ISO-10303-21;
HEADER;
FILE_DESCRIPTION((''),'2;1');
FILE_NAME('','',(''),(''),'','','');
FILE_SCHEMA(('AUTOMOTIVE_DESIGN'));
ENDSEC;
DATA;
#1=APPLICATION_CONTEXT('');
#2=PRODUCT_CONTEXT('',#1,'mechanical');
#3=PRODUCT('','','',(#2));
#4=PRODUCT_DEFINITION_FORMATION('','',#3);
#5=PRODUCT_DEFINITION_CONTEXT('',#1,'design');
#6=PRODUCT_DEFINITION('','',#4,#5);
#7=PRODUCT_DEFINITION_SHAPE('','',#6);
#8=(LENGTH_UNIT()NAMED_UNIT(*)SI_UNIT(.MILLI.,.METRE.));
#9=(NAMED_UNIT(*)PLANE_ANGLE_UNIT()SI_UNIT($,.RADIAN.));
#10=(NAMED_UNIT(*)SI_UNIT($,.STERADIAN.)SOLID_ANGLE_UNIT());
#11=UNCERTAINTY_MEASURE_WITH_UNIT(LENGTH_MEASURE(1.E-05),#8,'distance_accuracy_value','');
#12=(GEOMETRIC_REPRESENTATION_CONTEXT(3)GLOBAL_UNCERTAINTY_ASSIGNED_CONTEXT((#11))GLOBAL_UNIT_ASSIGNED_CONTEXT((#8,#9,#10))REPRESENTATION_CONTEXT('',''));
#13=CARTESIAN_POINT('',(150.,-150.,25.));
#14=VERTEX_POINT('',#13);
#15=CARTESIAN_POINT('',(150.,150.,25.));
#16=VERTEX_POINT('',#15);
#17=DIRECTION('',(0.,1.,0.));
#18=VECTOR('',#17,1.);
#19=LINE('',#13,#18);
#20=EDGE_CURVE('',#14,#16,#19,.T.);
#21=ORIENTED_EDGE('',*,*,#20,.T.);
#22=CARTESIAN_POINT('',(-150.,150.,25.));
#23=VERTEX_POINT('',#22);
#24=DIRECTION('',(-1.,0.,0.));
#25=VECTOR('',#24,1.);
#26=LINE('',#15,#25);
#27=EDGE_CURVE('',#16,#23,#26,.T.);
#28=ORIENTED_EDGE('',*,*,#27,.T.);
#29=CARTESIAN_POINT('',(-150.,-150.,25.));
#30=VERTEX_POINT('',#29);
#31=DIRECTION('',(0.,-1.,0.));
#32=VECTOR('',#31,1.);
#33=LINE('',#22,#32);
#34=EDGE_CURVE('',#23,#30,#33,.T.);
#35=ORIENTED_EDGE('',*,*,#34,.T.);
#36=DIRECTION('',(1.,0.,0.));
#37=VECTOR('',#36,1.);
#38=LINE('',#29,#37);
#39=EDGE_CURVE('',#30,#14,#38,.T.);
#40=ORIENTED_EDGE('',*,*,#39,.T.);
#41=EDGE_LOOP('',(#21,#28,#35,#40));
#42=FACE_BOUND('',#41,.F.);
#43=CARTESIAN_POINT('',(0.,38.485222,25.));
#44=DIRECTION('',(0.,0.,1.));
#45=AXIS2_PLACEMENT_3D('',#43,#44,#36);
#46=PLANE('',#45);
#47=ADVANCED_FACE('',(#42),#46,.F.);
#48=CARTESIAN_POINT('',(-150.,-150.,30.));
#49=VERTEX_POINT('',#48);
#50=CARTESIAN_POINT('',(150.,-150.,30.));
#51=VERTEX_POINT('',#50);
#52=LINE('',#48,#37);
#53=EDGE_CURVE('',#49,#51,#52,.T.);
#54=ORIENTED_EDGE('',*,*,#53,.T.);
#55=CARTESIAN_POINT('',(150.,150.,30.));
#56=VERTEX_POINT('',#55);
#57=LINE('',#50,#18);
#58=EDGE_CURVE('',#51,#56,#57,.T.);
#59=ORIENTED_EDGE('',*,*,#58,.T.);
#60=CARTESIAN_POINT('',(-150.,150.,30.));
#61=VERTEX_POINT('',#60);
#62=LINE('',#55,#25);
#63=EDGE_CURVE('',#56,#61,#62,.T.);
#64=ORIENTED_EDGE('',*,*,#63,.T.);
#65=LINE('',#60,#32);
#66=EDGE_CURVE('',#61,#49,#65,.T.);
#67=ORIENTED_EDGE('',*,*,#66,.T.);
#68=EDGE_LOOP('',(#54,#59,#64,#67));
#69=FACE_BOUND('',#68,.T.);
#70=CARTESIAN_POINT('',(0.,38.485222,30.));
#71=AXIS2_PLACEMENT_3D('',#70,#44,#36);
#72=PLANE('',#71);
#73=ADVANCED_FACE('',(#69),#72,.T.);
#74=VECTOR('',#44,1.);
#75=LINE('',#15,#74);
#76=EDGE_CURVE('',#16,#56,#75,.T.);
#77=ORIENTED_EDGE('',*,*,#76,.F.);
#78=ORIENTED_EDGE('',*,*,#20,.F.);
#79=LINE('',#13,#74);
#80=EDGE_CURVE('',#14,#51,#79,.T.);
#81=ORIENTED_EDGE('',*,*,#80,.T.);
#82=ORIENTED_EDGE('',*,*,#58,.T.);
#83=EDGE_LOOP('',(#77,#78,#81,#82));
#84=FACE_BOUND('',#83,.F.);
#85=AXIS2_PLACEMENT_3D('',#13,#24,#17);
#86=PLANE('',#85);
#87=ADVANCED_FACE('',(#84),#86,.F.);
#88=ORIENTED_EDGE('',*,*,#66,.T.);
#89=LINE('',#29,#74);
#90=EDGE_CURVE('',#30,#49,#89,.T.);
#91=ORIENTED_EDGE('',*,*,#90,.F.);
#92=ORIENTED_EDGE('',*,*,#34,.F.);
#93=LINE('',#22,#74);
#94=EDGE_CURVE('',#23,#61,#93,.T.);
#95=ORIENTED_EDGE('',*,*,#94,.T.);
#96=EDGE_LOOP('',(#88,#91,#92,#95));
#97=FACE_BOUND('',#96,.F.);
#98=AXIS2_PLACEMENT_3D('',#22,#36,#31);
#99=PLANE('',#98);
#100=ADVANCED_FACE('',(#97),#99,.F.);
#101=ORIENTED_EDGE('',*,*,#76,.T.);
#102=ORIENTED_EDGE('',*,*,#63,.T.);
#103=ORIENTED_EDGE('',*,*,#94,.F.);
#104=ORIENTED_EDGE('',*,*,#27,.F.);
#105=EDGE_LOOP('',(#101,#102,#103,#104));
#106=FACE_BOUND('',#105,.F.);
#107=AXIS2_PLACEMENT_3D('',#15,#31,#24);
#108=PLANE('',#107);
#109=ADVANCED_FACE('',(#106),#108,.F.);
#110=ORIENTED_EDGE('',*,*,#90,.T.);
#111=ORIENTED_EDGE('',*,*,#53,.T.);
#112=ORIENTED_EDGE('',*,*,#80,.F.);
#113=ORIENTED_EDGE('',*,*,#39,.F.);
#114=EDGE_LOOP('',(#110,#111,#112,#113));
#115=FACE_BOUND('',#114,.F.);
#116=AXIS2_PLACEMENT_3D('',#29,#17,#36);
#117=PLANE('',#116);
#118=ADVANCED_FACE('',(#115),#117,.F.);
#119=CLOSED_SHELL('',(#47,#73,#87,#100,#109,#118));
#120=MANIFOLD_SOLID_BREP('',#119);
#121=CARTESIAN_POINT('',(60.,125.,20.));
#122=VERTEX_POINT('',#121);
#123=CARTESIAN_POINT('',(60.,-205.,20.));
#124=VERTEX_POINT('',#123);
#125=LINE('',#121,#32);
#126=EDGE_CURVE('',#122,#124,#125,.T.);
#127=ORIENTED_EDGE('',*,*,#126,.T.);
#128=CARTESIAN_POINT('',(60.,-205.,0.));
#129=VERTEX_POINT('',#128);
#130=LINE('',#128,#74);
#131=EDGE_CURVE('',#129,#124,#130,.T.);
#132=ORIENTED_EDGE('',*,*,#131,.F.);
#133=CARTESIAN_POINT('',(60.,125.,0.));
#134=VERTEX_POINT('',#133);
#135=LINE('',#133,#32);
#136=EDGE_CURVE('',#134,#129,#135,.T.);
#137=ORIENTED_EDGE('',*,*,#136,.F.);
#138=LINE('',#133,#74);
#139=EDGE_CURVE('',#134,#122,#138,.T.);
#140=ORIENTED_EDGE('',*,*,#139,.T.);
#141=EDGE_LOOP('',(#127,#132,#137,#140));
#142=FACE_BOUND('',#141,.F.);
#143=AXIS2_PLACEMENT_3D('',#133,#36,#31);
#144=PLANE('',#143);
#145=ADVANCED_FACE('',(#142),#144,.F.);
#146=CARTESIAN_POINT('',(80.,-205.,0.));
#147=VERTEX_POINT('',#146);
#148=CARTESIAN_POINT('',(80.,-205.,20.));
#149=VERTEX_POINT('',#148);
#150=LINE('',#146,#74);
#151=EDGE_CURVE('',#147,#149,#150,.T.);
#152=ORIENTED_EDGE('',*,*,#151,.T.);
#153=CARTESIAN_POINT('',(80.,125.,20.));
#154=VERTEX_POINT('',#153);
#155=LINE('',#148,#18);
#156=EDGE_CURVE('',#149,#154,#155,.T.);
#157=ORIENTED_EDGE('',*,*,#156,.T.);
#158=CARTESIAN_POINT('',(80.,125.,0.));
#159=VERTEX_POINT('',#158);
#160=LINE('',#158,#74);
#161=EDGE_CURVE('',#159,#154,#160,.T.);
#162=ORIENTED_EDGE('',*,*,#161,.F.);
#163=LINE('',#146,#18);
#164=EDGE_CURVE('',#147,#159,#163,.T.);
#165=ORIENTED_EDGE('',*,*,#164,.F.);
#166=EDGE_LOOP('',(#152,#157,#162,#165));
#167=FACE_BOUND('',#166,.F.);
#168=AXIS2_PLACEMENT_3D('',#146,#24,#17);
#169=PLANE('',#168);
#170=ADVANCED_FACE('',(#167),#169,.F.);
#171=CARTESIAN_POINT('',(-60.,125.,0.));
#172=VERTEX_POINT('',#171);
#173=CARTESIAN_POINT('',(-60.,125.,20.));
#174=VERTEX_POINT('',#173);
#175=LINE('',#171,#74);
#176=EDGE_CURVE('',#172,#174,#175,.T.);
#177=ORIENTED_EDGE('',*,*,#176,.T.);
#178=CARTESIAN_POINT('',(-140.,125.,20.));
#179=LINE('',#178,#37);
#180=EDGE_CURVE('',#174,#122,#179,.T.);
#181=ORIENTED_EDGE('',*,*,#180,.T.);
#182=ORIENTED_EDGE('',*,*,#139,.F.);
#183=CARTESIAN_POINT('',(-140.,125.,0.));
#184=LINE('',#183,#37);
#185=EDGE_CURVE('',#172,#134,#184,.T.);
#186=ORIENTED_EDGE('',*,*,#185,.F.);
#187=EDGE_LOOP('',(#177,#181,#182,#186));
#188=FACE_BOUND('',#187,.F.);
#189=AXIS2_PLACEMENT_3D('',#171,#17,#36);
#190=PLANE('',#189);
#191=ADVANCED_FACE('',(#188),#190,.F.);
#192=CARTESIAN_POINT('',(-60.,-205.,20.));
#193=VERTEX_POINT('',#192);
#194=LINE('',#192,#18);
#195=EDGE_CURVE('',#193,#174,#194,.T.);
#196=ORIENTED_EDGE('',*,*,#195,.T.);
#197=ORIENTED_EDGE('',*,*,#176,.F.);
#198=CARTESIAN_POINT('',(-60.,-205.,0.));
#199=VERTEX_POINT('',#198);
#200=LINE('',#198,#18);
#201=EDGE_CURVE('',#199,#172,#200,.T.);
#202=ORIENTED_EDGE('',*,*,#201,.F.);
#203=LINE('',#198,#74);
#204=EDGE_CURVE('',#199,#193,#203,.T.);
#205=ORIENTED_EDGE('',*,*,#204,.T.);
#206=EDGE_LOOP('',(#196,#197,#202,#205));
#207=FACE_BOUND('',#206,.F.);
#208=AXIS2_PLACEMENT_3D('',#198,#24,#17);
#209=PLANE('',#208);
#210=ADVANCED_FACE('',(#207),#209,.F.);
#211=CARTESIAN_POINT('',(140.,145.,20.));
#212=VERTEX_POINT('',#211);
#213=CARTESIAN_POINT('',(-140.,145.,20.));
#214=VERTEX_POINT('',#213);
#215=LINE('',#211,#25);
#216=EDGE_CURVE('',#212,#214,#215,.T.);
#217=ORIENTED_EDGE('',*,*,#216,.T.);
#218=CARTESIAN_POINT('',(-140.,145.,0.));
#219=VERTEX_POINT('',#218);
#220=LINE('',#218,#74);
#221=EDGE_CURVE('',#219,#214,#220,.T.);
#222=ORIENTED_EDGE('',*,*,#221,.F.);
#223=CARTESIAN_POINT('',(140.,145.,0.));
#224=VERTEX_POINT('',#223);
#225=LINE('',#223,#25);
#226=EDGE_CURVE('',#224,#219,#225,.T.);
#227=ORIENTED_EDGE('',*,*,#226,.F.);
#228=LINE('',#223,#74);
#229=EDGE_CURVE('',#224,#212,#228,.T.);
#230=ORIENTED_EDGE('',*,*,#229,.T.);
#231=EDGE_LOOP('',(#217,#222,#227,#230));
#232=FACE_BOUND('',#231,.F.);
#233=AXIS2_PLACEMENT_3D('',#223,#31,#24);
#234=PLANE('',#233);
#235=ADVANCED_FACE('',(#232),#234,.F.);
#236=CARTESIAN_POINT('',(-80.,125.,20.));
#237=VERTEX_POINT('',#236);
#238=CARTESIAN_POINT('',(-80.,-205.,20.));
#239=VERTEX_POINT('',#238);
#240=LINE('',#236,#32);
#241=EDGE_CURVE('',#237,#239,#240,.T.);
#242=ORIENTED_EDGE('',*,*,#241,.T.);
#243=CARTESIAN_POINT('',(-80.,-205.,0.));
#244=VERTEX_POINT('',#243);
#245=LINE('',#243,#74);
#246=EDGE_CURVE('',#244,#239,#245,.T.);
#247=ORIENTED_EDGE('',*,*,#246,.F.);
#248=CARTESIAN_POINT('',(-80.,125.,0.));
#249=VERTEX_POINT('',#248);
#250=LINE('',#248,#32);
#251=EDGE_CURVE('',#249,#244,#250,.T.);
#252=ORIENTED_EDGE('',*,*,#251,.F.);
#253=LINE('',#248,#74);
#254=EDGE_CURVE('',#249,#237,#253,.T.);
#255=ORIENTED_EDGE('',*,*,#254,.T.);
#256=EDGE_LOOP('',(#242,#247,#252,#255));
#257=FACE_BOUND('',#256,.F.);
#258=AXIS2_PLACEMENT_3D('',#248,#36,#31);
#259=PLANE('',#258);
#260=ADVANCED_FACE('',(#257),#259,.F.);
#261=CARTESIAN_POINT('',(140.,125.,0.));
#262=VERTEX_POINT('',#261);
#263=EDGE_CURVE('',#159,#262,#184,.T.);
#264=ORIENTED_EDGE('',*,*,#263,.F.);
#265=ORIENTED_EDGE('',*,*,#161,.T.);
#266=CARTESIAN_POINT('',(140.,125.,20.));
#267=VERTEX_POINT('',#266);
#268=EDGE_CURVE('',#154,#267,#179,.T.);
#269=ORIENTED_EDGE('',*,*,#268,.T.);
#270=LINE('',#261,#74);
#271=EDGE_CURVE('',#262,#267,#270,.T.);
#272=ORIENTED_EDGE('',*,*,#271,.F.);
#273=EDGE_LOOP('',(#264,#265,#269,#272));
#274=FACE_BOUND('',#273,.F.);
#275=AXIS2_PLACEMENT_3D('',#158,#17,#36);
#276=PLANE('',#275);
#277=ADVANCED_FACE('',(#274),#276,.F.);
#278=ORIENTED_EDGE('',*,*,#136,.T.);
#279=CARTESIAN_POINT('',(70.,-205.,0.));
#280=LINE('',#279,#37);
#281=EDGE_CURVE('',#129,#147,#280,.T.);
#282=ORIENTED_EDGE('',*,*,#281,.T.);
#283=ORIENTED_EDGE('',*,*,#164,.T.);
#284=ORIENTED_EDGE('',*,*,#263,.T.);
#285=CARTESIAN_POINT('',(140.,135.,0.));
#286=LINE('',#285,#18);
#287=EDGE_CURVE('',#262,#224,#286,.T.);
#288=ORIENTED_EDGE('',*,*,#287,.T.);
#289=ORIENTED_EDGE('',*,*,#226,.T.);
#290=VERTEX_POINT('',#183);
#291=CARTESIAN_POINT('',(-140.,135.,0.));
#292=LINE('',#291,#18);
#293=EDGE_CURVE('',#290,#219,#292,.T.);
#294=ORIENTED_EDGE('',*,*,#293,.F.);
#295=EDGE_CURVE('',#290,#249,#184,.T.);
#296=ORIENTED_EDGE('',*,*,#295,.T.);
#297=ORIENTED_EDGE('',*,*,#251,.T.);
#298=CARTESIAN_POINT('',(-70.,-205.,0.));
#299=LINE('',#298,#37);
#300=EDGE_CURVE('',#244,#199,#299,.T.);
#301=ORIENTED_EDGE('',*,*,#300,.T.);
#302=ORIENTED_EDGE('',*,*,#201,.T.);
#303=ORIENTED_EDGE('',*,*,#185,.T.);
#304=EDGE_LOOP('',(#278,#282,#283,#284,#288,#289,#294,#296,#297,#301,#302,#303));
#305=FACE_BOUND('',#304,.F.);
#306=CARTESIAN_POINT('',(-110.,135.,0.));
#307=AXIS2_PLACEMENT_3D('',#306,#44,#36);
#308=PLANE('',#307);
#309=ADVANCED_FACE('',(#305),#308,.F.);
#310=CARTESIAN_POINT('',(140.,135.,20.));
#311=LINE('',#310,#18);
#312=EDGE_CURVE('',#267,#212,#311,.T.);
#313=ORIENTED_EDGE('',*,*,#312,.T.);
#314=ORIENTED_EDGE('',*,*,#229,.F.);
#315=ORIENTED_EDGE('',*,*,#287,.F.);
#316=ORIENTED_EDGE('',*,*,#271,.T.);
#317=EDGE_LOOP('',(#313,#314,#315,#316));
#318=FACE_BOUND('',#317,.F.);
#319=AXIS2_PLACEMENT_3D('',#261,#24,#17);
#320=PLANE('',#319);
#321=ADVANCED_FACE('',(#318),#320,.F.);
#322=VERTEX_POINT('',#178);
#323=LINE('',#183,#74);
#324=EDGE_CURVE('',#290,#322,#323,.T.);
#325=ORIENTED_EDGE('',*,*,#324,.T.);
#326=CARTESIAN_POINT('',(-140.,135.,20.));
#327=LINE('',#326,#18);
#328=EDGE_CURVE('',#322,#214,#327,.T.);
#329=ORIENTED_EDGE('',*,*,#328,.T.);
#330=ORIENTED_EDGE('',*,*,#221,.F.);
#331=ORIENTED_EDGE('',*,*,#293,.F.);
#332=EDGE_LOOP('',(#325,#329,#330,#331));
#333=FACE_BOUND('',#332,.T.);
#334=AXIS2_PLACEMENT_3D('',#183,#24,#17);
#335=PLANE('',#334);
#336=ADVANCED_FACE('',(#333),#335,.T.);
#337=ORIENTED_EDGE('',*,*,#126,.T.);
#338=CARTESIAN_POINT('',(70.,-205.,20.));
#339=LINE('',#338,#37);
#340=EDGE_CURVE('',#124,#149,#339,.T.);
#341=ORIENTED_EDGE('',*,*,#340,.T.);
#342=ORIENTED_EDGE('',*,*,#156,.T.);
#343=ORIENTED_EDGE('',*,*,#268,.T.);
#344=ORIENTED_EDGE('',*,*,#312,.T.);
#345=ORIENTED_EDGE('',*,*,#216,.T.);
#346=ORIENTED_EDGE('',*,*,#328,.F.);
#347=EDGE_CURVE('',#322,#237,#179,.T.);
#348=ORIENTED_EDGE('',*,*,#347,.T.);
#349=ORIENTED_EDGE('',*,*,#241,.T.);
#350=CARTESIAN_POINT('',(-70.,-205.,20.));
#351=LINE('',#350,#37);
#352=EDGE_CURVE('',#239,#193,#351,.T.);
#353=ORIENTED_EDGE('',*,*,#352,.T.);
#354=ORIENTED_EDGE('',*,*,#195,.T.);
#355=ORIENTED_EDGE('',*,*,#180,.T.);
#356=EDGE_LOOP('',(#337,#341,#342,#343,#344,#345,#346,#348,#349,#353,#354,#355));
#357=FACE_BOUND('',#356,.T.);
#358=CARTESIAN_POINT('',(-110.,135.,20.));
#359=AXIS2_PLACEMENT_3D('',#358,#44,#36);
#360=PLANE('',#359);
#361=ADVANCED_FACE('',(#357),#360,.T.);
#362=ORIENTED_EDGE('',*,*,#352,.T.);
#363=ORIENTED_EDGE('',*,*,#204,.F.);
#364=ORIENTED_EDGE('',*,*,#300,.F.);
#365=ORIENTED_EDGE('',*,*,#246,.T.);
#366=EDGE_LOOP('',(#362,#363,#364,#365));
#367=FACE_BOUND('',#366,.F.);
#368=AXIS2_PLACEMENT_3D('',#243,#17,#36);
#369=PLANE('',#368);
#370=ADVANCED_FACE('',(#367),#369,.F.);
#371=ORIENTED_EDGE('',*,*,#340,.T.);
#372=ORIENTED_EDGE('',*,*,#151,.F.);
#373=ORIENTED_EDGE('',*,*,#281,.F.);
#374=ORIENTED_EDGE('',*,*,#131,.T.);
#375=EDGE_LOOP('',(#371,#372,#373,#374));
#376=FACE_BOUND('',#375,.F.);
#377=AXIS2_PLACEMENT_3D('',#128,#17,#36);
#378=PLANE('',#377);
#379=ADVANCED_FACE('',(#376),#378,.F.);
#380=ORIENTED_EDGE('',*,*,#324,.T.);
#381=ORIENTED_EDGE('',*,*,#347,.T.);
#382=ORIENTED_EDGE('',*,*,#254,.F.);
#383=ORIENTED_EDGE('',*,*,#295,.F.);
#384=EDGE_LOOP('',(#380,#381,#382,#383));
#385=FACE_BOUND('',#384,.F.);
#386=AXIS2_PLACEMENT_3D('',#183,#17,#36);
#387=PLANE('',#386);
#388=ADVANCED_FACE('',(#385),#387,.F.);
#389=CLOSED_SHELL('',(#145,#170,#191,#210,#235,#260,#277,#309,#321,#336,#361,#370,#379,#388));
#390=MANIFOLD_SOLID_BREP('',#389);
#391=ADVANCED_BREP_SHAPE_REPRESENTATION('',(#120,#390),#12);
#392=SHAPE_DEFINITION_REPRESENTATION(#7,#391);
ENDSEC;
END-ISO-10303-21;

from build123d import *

# Parameters (mm, degrees)
F1_START = 25
F0_W     = 20
F0_H     = 275
F0_W_2   = 120
F0_W_3   = 60
F0_H_2   = 20
F1_DEPTH = 5
F0_H_3   = 55
F2_DEPTH = 20


# Not quite as in the source:
# - a feature names something its author has since deleted; it is built from what else it names


with BuildPart() as f1:
    # F0 (on Top) → F1 (new body)
    with BuildSketch(Plane.XY.offset(F1_START)):
        Polygon((150, -150), (150, 150), (-150, 150), (-150, -150), (-80, -150), (-80, 125), (-140, 125), (-140, 145), (-80, 145), (-60, 145), (60, 145), (80, 145), (140, 145), (140, 125), (80, 125), (80, -150), align=None)
        with Locations((-70, -12.5)):
            Rectangle(F0_W, F0_H)
        with Locations((0, -12.5)):
            Rectangle(F0_W_2, F0_H)
        with Locations((70, -12.5)):
            Rectangle(F0_W, F0_H)
        with Locations((-110, 135)):
            Rectangle(F0_W_3, F0_H_2)
        with Locations((-70, 135)):
            Rectangle(F0_W, F0_H_2)
        with Locations((0, 135)):
            Rectangle(F0_W_2, F0_H_2)
        with Locations((70, 135)):
            Rectangle(F0_W, F0_H_2)
        with Locations((110, 135)):
            Rectangle(F0_W_3, F0_H_2)
    extrude(amount=F1_DEPTH)


with BuildPart() as f2:
    # F0 (on Top) → F2 (new body)
    with BuildSketch(Plane.XY):
        with Locations((-110, 135)):
            Rectangle(F0_W_3, F0_H_2)
        with Locations((-70, 135)):
            Rectangle(F0_W, F0_H_2)
        with Locations((0, 135)):
            Rectangle(F0_W_2, F0_H_2)
        with Locations((70, 135)):
            Rectangle(F0_W, F0_H_2)
        with Locations((110, 135)):
            Rectangle(F0_W_3, F0_H_2)
        with Locations((70, -12.5)):
            Rectangle(F0_W, F0_H)
        with Locations((-70, -12.5)):
            Rectangle(F0_W, F0_H)
        with Locations((-70, -177.5)):
            Rectangle(F0_W, F0_H_3)
        with Locations((70, -177.5)):
            Rectangle(F0_W, F0_H_3)
    extrude(amount=F2_DEPTH)


solid = Compound([f1.part, f2.part])
